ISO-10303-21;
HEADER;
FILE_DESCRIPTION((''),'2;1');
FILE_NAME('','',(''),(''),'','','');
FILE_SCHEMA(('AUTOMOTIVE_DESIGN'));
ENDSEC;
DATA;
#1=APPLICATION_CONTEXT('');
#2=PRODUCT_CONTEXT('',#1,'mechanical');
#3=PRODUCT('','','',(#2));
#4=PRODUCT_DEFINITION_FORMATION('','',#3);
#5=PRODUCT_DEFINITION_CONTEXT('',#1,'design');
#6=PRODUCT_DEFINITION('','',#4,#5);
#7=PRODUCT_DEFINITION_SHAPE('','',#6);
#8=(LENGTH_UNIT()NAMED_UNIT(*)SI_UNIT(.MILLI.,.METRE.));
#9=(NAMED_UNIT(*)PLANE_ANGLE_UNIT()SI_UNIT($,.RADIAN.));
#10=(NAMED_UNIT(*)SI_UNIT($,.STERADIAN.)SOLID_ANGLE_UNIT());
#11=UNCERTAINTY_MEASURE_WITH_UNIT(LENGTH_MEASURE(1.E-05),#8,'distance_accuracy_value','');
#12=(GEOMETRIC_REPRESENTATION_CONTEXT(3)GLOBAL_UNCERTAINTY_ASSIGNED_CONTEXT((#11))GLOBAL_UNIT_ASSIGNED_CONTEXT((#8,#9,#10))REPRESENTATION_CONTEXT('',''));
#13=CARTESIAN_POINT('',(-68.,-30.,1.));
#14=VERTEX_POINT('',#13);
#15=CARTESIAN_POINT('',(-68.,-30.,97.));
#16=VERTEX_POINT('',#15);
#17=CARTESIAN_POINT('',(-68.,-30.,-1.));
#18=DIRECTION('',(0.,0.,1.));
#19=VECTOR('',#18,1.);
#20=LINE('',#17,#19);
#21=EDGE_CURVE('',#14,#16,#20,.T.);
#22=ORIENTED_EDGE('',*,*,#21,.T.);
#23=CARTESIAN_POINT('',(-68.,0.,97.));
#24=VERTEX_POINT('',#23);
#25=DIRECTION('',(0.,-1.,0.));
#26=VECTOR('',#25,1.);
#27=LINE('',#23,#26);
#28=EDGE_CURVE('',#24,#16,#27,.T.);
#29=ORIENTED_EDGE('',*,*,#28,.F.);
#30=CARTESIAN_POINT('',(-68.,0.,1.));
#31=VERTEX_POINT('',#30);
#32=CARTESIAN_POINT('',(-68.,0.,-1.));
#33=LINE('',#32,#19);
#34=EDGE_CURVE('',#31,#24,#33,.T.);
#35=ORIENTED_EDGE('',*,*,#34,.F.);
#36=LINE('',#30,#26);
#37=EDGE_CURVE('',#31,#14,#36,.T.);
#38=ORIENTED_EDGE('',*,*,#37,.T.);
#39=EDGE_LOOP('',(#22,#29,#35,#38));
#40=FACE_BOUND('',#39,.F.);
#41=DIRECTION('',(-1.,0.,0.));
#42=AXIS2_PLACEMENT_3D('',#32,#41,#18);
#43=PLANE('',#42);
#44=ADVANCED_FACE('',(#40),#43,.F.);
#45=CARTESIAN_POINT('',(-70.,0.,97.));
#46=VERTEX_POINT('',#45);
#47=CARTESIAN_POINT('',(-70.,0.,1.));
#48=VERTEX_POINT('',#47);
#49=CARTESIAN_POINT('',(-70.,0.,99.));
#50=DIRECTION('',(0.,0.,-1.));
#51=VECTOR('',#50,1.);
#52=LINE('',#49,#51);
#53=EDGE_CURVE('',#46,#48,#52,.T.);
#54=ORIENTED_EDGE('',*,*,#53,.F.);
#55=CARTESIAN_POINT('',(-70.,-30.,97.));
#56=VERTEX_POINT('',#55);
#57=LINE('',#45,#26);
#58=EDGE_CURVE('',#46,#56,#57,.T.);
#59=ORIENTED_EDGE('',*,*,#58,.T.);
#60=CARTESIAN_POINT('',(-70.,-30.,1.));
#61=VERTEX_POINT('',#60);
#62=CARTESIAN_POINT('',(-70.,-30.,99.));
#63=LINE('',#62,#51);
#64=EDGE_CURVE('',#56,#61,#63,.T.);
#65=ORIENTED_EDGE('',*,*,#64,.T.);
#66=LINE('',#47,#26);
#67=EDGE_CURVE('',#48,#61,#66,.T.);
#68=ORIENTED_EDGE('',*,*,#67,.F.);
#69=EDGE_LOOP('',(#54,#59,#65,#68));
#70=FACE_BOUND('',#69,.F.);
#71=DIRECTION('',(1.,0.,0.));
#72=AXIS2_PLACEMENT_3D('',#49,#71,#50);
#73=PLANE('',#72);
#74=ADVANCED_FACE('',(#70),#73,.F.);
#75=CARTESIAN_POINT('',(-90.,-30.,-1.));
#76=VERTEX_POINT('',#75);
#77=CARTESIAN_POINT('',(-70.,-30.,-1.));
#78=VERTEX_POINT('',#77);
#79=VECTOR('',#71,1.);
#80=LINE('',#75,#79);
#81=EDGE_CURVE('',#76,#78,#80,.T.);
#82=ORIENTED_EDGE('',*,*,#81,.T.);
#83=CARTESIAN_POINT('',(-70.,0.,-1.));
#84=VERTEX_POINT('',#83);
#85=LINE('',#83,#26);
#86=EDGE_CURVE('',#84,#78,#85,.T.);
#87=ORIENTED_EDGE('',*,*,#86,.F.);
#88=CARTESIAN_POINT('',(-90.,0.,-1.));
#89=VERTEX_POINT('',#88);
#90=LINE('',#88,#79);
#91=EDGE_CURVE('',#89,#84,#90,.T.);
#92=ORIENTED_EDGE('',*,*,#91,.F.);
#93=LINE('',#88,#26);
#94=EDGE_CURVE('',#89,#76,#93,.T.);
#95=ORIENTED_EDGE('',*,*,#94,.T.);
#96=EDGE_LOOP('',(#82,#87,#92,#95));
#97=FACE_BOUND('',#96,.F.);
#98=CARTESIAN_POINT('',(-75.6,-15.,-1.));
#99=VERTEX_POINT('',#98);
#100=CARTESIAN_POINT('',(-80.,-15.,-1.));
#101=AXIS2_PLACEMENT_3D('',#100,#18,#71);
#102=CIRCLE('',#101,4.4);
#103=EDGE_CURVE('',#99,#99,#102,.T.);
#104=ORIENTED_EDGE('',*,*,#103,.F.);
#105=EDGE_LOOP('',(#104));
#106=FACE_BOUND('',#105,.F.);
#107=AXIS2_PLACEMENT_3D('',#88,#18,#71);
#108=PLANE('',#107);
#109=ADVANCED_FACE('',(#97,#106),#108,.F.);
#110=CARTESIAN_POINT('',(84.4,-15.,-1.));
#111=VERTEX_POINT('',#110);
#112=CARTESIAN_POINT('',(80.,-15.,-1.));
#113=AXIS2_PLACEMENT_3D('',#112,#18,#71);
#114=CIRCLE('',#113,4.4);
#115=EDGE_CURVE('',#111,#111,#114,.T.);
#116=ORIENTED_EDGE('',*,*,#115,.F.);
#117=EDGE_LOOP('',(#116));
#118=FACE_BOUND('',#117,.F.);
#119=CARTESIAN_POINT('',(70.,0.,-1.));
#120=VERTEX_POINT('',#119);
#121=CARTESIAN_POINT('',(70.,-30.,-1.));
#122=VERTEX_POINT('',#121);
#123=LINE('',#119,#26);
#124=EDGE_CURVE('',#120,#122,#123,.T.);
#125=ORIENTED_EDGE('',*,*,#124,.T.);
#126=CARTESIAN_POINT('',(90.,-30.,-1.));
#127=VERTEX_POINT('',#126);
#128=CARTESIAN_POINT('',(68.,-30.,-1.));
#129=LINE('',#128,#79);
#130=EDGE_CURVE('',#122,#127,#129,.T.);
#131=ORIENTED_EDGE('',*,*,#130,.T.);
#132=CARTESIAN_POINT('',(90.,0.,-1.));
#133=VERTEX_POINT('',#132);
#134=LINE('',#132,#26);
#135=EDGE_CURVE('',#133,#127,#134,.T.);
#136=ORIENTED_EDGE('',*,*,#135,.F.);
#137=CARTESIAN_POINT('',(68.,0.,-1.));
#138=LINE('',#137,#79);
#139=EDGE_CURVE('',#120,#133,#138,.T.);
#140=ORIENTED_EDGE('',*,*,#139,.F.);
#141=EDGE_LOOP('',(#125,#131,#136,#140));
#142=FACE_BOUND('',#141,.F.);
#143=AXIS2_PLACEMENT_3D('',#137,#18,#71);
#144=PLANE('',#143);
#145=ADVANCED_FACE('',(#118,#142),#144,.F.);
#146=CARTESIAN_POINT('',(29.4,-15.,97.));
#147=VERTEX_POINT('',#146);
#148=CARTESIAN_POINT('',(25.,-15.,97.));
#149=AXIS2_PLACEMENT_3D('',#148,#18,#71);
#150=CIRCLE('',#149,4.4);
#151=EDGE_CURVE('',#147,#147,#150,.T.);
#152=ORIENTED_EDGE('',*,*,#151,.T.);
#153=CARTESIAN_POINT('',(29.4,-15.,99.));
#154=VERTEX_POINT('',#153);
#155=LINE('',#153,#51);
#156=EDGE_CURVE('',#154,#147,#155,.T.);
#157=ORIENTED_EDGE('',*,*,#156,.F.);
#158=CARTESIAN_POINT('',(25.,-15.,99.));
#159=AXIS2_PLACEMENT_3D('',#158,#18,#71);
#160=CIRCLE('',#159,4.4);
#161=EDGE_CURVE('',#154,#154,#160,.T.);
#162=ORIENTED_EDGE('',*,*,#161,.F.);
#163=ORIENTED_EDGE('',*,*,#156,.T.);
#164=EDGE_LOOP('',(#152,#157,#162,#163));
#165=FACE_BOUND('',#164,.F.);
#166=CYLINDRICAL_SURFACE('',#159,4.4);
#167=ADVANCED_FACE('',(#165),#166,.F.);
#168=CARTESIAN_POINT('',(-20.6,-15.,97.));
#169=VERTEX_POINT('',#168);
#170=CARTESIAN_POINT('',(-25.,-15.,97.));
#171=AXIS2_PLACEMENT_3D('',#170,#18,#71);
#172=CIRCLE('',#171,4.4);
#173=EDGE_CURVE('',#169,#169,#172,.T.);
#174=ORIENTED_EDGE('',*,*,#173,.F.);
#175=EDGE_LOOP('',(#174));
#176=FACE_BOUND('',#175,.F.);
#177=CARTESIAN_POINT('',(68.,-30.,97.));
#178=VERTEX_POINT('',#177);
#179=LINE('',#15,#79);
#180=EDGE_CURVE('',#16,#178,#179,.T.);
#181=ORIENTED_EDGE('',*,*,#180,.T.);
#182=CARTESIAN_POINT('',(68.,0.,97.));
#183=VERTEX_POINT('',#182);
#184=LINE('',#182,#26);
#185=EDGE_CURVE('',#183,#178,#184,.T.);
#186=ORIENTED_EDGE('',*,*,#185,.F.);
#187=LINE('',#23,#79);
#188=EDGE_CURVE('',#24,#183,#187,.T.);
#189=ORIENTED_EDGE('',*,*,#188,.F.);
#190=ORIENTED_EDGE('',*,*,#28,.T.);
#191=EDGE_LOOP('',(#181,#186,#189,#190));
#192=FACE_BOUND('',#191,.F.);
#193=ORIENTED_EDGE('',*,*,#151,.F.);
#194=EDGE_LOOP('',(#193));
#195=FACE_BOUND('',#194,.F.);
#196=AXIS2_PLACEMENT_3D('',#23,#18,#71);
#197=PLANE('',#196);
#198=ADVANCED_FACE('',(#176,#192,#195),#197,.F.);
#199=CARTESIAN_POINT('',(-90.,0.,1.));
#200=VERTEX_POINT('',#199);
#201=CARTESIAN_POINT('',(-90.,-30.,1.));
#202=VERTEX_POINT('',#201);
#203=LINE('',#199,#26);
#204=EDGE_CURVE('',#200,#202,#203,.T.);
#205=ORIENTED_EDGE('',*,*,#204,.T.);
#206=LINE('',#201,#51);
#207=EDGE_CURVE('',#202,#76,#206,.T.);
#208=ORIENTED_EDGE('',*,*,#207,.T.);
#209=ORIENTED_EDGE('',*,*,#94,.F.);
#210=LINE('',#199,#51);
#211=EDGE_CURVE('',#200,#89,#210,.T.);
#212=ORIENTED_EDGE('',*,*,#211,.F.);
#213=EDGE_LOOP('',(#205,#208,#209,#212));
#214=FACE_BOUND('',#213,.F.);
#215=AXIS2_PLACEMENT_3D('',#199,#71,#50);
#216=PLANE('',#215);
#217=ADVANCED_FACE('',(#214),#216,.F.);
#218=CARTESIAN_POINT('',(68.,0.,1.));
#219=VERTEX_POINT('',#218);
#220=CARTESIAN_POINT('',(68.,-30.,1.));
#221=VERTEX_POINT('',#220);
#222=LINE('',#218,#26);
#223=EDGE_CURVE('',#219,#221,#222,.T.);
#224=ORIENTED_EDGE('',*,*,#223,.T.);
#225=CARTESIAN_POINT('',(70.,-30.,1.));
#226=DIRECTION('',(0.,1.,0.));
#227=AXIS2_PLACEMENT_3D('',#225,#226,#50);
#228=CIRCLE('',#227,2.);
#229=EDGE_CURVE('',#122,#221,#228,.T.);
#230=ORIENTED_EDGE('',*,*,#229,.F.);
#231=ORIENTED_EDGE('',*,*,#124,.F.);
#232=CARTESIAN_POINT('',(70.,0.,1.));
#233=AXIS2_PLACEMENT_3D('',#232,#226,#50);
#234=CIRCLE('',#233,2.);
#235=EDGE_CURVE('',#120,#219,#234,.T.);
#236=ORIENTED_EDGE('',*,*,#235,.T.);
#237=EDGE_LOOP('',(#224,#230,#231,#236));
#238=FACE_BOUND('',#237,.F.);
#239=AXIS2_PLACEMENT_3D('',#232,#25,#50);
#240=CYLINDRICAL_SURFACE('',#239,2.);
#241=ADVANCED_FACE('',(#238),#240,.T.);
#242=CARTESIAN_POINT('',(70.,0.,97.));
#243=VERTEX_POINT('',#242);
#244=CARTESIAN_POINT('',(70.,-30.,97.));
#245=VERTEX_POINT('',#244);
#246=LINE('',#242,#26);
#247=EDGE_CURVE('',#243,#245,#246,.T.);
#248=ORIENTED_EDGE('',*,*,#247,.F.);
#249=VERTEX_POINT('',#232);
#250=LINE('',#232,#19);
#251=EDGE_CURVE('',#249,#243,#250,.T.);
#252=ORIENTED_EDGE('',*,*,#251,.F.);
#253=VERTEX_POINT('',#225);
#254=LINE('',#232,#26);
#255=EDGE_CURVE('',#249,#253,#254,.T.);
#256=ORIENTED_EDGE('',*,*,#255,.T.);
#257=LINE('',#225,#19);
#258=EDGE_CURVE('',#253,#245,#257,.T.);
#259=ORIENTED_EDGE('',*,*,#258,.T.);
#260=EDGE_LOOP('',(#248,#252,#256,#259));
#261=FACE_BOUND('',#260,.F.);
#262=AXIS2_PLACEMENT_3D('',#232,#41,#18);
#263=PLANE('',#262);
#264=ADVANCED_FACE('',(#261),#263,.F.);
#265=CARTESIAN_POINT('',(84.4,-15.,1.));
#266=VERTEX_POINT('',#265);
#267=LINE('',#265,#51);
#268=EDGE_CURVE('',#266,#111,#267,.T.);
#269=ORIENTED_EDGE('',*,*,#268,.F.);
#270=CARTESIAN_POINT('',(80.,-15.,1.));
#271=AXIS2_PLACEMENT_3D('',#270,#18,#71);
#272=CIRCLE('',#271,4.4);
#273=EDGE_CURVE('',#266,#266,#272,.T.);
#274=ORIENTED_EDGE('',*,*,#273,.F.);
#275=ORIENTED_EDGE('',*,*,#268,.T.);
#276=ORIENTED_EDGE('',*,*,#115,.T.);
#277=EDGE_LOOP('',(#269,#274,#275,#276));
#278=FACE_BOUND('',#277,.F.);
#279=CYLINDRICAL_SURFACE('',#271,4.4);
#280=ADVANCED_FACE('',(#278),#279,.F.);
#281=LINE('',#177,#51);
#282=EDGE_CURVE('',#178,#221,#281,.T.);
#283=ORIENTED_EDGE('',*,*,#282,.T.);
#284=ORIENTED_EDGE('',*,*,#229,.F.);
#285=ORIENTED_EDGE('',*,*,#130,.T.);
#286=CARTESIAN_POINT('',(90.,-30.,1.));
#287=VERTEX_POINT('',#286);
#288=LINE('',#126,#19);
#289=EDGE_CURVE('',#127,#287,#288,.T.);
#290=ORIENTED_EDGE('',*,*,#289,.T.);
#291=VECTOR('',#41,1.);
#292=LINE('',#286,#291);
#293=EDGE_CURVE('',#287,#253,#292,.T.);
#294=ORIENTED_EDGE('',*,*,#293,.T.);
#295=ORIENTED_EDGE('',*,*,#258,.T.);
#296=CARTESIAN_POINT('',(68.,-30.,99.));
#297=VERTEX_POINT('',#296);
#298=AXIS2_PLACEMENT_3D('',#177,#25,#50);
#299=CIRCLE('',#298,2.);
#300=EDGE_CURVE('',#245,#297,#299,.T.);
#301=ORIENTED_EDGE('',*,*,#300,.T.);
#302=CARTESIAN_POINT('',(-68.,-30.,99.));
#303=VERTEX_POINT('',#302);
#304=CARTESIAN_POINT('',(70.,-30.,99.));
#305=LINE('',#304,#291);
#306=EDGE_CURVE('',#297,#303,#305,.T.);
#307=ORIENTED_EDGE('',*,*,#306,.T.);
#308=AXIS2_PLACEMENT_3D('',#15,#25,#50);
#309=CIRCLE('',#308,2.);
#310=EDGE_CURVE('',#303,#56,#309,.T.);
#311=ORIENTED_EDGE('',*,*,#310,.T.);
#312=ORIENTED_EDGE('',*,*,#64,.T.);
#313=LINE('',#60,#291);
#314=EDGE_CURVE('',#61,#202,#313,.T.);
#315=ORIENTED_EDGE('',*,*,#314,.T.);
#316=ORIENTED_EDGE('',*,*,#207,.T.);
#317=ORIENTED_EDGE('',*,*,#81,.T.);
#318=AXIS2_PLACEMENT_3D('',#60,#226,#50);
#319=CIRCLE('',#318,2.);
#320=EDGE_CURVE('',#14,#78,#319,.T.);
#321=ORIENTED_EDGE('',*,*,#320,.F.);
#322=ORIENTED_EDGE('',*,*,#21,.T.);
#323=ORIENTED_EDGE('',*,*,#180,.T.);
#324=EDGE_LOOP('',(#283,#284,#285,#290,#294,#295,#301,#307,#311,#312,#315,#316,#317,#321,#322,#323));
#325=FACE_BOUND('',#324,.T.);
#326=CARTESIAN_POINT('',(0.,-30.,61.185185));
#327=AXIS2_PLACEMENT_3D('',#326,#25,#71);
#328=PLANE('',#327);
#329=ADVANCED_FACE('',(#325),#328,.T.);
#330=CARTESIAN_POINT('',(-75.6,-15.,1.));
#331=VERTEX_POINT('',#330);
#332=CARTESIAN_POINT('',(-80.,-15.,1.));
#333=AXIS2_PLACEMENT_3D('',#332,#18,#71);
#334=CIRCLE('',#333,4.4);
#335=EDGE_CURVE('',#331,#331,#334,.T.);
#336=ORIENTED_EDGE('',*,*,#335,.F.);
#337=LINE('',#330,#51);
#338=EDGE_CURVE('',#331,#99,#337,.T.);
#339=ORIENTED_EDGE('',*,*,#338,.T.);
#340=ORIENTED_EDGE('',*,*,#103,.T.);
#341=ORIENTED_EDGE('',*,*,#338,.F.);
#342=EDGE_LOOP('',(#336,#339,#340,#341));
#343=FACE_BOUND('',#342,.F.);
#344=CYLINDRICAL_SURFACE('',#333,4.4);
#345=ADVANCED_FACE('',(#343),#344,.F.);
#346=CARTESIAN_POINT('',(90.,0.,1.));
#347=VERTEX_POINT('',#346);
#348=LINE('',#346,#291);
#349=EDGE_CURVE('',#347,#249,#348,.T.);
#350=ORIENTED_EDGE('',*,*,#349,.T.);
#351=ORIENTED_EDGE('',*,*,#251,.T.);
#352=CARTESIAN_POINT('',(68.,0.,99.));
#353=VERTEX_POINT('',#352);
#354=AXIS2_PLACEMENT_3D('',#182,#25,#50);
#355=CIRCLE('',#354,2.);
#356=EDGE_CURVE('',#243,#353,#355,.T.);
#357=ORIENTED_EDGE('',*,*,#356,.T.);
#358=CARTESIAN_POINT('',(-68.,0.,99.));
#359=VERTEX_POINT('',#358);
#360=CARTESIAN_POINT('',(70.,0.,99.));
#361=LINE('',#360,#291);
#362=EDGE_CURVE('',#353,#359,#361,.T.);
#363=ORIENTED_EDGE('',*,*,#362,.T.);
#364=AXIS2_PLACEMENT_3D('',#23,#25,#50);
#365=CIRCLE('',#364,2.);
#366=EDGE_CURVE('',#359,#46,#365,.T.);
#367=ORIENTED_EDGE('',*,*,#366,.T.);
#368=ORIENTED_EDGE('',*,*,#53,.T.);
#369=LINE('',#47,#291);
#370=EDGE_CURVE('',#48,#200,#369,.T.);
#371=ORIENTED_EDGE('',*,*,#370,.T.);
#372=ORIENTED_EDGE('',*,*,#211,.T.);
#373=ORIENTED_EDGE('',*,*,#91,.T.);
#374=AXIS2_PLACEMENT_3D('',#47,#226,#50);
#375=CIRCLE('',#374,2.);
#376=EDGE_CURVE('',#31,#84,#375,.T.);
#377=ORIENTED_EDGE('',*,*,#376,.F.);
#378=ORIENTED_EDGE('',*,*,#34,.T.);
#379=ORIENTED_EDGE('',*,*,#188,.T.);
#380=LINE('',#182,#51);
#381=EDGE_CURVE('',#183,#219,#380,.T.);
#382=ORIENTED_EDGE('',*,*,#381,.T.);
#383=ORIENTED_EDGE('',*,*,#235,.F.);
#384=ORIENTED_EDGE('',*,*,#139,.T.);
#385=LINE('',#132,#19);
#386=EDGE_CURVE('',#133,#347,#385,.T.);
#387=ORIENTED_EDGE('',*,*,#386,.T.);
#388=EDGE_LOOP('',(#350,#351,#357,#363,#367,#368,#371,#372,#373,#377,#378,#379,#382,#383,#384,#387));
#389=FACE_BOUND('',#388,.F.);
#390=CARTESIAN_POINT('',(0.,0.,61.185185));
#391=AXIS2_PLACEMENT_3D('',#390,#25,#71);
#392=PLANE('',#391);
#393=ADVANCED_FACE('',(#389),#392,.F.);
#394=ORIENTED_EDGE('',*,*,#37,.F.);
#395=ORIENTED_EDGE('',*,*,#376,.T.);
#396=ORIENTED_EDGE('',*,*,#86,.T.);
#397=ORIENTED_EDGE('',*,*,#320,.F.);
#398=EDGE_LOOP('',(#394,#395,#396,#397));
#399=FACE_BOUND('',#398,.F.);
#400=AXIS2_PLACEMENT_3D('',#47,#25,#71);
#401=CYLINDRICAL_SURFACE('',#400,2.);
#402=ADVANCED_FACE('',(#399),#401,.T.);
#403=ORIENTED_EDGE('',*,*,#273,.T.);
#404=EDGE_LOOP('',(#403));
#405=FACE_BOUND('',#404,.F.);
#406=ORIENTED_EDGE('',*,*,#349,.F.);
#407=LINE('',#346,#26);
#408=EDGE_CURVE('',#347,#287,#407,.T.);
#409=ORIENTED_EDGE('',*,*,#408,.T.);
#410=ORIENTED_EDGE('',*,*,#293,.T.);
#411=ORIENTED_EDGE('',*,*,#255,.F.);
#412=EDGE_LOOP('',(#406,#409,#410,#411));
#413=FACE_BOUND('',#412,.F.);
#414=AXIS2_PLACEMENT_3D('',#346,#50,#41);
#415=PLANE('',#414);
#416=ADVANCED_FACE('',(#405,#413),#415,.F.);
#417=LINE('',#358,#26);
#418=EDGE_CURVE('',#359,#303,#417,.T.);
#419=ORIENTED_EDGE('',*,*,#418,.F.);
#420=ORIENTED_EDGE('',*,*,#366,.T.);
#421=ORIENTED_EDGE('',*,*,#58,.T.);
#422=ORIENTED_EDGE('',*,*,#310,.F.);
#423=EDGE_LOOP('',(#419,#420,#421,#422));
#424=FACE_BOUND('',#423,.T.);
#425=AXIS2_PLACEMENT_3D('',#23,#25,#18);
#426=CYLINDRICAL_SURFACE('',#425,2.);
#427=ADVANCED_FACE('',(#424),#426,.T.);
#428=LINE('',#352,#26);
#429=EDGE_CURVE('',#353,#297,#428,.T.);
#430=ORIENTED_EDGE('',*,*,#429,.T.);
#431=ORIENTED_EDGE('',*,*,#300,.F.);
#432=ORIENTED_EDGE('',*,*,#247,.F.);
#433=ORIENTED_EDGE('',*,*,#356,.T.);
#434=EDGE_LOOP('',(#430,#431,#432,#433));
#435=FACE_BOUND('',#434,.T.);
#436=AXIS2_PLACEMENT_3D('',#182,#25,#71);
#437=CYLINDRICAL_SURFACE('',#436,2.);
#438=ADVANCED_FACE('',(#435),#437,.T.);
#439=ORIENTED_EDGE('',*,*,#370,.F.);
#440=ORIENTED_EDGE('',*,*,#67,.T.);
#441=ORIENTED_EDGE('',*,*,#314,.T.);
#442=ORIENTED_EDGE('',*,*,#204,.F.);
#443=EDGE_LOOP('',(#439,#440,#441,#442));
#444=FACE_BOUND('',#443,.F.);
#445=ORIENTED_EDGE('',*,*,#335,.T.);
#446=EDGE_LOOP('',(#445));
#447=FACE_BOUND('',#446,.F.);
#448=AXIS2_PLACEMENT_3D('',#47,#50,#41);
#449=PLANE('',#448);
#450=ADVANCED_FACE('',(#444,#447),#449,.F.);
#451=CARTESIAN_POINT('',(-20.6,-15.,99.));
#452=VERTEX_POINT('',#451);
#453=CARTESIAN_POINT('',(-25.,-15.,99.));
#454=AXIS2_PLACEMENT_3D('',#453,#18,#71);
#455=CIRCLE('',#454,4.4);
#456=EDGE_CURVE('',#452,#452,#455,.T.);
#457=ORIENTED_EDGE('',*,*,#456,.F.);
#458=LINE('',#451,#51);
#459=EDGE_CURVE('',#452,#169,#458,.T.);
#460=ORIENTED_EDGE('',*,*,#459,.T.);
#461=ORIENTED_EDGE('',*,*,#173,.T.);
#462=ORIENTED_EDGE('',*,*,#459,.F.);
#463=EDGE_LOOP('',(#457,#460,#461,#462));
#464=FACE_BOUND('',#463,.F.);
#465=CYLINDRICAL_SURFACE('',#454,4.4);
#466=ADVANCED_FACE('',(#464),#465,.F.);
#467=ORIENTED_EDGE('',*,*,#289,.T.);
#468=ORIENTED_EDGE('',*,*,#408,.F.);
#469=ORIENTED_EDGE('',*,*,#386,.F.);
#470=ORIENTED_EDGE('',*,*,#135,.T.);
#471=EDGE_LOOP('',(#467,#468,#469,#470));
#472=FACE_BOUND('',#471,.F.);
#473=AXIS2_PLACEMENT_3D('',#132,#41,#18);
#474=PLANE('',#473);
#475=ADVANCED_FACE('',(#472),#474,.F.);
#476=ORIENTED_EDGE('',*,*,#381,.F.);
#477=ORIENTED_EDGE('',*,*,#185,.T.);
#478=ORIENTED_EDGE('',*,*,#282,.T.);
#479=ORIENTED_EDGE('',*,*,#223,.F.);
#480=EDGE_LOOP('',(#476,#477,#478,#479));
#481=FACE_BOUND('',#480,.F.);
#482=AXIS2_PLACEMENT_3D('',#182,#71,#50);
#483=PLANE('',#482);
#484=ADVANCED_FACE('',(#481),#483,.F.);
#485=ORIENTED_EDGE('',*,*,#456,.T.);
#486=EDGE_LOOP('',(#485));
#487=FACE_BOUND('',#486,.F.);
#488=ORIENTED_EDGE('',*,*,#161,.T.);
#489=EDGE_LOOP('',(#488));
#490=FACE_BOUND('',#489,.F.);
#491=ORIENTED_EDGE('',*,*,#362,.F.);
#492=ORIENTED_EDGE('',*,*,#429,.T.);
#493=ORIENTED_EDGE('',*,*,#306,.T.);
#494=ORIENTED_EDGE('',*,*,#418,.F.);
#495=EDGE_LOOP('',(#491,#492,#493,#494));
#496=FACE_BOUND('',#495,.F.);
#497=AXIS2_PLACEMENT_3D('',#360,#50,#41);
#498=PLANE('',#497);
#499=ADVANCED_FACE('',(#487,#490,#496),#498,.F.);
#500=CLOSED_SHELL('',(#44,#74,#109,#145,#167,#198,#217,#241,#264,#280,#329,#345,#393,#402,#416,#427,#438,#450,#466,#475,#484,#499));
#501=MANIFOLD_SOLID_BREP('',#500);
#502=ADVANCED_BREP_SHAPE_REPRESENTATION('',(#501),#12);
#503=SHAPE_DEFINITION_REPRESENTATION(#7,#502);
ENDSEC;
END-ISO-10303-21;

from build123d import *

# Parameters (mm, degrees)
F1_DEPTH = 30
F2_R     = 4.4
F3_R     = 4.4
F4_DEPTH = 25
F5_R     = 2
F6_R     = 2


# Not quite as in the source:
# - a feature names something its author has since deleted; it is built from what else it names


with BuildPart() as f1:
    # F0 (on Front) → F1 (new body)
    with BuildSketch(Plane.XZ):
        Polygon((90, -1), (90, 1), (70, 1), (70, 99), (-70, 99), (-70, 1), (-90, 1), (-90, -1), (-68, -1), (-68, 97), (68, 97), (68, -1), align=None)
    extrude(amount=F1_DEPTH)

    # F2 (on face) + F3 (on face) → F4 (cut)
    with BuildSketch(Plane.XY.offset(1)):
        with Locations((-80, -15)):
            Circle(F2_R)
        with Locations((80, -15)):
            Circle(F2_R)
    with BuildSketch(Plane.XY.offset(99)):
        with Locations((-25, -15)):
            Circle(F3_R)
        with Locations((25, -15)):
            Circle(F3_R)
    extrude(amount=-F4_DEPTH, mode=Mode.SUBTRACT)

    # F5
    f5_edges = [f1.edges().sort_by_distance(p)[0] for p in [
        (-70, -15, 99),
        (70, -15, 99),
    ]]
    fillet(f5_edges, radius=F5_R)

    # F6
    f6_edges = [f1.edges().sort_by_distance(p)[0] for p in [
        (68, -15, -1),
        (-68, -15, -1),
    ]]
    fillet(f6_edges, radius=F6_R)


solid = f1.part
